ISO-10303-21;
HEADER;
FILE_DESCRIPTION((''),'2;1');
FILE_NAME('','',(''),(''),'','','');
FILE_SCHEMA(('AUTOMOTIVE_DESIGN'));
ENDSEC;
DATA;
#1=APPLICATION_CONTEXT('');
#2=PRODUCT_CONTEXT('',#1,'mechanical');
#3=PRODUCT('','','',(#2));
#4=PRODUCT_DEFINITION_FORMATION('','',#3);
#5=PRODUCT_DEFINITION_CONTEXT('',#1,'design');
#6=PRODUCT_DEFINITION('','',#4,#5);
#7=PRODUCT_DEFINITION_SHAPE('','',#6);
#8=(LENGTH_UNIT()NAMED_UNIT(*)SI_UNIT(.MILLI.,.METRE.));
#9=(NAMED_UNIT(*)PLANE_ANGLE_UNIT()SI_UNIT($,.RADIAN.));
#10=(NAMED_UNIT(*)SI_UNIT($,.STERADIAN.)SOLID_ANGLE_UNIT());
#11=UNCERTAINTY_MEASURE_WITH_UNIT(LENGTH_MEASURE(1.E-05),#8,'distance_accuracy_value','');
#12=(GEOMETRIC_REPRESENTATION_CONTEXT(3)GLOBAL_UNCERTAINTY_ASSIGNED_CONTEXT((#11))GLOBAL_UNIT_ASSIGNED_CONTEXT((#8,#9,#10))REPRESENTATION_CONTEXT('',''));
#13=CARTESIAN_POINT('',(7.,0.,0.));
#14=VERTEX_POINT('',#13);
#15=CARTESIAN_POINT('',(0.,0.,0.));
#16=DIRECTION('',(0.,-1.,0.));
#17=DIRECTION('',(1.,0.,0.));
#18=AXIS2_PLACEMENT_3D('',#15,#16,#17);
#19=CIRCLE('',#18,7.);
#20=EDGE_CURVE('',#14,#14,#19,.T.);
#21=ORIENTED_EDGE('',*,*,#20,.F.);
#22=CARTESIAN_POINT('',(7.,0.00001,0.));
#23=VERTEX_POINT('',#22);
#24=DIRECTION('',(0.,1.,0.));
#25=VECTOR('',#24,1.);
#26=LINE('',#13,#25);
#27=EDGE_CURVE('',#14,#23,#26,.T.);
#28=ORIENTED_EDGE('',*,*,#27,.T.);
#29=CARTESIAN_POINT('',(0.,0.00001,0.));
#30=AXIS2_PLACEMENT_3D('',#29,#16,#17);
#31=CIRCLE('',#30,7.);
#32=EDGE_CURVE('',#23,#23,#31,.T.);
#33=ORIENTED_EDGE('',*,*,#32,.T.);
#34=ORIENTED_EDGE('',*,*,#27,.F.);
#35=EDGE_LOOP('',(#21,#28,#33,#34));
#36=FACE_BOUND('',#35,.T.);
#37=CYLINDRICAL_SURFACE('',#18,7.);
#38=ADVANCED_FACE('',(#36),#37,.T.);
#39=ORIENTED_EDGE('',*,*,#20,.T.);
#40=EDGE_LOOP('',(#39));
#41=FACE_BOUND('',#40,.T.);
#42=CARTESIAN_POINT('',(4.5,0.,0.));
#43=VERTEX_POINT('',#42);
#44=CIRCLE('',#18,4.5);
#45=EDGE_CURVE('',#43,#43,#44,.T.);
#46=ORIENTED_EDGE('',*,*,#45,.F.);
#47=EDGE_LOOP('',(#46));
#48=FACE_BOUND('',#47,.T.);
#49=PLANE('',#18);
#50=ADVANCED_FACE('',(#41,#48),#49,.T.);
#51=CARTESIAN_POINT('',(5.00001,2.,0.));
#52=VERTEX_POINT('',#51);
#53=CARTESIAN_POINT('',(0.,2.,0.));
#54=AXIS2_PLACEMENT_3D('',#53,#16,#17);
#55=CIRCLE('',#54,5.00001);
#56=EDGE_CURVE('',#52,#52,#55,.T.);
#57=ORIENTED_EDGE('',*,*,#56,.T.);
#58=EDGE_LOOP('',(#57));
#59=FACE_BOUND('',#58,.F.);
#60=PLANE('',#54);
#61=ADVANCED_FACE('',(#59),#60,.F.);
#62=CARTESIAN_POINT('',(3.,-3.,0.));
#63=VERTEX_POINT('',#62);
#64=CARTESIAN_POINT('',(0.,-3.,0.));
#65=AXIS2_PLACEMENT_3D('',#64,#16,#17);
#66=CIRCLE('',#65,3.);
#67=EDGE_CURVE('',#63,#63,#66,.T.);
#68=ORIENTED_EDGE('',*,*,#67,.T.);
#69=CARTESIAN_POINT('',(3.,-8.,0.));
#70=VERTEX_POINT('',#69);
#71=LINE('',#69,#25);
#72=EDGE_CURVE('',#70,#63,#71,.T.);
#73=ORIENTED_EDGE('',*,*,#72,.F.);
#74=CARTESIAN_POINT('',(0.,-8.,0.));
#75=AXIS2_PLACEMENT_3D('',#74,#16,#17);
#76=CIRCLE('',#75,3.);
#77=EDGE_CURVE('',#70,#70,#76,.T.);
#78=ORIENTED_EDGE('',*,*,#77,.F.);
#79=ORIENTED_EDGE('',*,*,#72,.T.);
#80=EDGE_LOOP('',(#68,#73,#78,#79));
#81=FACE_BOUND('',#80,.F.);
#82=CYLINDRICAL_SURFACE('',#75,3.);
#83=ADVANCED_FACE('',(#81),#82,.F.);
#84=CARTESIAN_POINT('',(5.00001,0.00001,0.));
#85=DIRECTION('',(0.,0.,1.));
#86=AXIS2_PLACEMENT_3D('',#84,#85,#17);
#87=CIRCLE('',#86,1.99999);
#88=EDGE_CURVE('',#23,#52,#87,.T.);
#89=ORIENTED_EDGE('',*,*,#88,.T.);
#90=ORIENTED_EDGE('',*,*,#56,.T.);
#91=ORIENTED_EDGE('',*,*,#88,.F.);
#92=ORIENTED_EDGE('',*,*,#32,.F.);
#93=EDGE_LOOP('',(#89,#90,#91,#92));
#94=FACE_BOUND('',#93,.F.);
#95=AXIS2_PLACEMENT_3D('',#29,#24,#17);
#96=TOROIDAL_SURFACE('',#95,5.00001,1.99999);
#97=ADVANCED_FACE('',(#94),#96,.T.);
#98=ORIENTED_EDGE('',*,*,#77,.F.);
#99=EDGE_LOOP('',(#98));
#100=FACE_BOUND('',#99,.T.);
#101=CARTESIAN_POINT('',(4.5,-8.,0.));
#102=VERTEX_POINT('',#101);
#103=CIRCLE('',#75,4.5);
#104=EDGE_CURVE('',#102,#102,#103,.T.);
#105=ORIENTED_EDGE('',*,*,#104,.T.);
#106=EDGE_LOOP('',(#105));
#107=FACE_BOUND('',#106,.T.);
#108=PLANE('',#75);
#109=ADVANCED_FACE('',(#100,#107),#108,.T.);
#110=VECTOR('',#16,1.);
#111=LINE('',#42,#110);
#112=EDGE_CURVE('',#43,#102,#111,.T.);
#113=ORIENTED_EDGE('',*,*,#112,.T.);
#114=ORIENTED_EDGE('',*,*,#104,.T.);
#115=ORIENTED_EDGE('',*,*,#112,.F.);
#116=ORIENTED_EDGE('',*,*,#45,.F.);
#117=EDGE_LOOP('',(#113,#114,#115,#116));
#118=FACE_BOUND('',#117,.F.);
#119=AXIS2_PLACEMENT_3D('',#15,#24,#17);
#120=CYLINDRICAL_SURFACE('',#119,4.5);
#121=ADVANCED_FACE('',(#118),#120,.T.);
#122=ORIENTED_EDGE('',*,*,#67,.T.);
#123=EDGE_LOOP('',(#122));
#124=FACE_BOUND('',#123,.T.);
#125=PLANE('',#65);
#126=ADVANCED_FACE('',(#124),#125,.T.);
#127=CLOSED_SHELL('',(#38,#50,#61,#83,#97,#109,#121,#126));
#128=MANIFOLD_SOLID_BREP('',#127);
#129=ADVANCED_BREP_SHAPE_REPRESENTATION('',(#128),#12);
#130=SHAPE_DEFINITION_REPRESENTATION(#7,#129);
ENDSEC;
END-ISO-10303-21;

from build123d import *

# Parameters (mm, degrees)
F0_R     = 4.5
F1_DEPTH = 8
F0_R_2   = 7
F2_DEPTH = 2
F3_R     = 1.99999
F4_R     = 3
F5_DEPTH = 5


# Not quite as in the source:
# - a fillet or chamfer is up to 0.001 mm smaller than in the source, because OpenCascade refuses the exact size


with BuildPart() as f1:
    # F0 (on Front) → F1 (new body)
    with BuildSketch(Plane.XZ):
        Circle(F0_R)
    extrude(amount=F1_DEPTH)

    # F0 (on Front) → F2 (join)
    with BuildSketch(Plane.XZ):
        Circle(F0_R_2)
        Circle(F0_R, mode=Mode.SUBTRACT)
        Circle(F0_R)
    extrude(amount=-F2_DEPTH)

    # F3 (radius 2 in the source; OpenCascade refuses exactly that, so slightly less here)
    f3_edges = [f1.edges().sort_by_distance(p)[0] for p in [
        (-7, 2, 0),
    ]]
    fillet(f3_edges, radius=F3_R)

    # F4 (on face) → F5 (cut)
    with BuildSketch(Plane.XZ.offset(8)):
        Circle(F4_R)
    extrude(amount=-F5_DEPTH, mode=Mode.SUBTRACT)


solid = f1.part
